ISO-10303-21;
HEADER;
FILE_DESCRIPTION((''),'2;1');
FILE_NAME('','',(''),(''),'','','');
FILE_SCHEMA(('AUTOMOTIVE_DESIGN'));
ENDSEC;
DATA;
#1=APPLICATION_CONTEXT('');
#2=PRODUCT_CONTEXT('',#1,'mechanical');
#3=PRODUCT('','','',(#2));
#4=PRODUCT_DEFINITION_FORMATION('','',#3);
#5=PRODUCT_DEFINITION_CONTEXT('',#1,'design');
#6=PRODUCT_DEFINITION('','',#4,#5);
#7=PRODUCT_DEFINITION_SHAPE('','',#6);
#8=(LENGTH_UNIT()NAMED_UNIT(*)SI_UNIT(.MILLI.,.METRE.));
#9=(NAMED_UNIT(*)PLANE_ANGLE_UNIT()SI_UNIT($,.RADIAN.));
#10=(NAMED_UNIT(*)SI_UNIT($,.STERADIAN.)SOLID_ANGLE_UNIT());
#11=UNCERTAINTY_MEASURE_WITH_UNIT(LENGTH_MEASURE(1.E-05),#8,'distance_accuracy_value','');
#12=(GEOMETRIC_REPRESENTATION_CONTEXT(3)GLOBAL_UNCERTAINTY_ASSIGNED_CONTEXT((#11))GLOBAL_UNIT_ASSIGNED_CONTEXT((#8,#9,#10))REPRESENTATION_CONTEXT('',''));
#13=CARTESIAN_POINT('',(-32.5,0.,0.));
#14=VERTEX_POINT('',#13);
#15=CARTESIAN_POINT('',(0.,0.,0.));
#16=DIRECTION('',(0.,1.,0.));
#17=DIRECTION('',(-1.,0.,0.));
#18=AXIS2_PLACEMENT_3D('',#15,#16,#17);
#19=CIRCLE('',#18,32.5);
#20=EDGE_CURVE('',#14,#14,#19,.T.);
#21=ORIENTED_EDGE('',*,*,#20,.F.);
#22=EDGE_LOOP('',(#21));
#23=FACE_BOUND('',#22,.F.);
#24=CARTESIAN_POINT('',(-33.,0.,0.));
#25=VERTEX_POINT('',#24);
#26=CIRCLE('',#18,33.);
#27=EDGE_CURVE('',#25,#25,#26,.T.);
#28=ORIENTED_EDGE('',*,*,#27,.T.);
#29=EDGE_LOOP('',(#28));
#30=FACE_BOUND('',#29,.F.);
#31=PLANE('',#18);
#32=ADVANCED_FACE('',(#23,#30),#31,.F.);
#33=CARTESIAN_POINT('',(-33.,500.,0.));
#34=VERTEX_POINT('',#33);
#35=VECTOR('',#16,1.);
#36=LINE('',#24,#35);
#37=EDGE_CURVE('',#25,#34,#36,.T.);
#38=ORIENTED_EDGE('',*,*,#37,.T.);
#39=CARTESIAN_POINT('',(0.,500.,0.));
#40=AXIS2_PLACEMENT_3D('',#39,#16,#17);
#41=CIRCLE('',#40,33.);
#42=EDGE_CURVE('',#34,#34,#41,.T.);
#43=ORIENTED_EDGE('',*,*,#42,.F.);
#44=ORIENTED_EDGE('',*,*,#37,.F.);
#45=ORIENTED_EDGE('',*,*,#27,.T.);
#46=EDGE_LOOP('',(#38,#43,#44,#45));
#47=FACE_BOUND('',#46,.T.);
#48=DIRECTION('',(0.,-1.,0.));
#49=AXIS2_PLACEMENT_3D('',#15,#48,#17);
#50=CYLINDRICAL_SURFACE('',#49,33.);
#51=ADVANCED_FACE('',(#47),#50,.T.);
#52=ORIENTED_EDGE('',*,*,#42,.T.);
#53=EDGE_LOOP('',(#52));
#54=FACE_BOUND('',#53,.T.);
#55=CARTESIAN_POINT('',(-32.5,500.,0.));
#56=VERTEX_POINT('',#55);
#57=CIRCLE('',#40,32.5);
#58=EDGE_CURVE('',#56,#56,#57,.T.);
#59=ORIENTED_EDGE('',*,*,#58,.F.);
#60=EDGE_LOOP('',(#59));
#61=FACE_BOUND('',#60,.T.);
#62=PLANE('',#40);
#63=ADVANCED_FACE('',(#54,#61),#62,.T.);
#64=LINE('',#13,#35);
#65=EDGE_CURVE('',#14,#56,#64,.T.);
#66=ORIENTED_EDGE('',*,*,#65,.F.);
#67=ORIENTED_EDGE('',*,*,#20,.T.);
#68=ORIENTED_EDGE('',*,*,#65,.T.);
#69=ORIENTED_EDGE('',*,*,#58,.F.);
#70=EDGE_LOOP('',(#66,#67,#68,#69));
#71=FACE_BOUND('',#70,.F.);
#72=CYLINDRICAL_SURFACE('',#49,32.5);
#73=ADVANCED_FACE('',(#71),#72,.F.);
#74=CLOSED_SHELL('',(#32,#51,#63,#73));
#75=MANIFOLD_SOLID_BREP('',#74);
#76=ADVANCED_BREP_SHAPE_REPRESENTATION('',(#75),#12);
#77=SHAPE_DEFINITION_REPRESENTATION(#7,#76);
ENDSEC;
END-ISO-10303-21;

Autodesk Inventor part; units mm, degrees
ref_plane "YZ Plane" through (0, 0, 0) normal (1, 0, 0) x (0, 1, 0)
ref_plane "XZ Plane" through (0, 0, 0) normal (0, 1, 0) x (-1, 0, 0)
ref_plane "XY Plane" through (0, 0, 0) normal (0, 0, 1) x (1, 0, 0)
sketch "Sketch1" plane through (0, 0, 0) normal (0, 1, 0) x (-1, 0, 0)
  circle A0 centre (0, 0) radius 32.5
  circle A1 centre (0, 0) radius 33
  dimension "d0" = 65
  dimension "d1" = 66
extrude "Extrusion1" add sketch "Sketch1" along normal blind 500
properties part number "bt80tube"
